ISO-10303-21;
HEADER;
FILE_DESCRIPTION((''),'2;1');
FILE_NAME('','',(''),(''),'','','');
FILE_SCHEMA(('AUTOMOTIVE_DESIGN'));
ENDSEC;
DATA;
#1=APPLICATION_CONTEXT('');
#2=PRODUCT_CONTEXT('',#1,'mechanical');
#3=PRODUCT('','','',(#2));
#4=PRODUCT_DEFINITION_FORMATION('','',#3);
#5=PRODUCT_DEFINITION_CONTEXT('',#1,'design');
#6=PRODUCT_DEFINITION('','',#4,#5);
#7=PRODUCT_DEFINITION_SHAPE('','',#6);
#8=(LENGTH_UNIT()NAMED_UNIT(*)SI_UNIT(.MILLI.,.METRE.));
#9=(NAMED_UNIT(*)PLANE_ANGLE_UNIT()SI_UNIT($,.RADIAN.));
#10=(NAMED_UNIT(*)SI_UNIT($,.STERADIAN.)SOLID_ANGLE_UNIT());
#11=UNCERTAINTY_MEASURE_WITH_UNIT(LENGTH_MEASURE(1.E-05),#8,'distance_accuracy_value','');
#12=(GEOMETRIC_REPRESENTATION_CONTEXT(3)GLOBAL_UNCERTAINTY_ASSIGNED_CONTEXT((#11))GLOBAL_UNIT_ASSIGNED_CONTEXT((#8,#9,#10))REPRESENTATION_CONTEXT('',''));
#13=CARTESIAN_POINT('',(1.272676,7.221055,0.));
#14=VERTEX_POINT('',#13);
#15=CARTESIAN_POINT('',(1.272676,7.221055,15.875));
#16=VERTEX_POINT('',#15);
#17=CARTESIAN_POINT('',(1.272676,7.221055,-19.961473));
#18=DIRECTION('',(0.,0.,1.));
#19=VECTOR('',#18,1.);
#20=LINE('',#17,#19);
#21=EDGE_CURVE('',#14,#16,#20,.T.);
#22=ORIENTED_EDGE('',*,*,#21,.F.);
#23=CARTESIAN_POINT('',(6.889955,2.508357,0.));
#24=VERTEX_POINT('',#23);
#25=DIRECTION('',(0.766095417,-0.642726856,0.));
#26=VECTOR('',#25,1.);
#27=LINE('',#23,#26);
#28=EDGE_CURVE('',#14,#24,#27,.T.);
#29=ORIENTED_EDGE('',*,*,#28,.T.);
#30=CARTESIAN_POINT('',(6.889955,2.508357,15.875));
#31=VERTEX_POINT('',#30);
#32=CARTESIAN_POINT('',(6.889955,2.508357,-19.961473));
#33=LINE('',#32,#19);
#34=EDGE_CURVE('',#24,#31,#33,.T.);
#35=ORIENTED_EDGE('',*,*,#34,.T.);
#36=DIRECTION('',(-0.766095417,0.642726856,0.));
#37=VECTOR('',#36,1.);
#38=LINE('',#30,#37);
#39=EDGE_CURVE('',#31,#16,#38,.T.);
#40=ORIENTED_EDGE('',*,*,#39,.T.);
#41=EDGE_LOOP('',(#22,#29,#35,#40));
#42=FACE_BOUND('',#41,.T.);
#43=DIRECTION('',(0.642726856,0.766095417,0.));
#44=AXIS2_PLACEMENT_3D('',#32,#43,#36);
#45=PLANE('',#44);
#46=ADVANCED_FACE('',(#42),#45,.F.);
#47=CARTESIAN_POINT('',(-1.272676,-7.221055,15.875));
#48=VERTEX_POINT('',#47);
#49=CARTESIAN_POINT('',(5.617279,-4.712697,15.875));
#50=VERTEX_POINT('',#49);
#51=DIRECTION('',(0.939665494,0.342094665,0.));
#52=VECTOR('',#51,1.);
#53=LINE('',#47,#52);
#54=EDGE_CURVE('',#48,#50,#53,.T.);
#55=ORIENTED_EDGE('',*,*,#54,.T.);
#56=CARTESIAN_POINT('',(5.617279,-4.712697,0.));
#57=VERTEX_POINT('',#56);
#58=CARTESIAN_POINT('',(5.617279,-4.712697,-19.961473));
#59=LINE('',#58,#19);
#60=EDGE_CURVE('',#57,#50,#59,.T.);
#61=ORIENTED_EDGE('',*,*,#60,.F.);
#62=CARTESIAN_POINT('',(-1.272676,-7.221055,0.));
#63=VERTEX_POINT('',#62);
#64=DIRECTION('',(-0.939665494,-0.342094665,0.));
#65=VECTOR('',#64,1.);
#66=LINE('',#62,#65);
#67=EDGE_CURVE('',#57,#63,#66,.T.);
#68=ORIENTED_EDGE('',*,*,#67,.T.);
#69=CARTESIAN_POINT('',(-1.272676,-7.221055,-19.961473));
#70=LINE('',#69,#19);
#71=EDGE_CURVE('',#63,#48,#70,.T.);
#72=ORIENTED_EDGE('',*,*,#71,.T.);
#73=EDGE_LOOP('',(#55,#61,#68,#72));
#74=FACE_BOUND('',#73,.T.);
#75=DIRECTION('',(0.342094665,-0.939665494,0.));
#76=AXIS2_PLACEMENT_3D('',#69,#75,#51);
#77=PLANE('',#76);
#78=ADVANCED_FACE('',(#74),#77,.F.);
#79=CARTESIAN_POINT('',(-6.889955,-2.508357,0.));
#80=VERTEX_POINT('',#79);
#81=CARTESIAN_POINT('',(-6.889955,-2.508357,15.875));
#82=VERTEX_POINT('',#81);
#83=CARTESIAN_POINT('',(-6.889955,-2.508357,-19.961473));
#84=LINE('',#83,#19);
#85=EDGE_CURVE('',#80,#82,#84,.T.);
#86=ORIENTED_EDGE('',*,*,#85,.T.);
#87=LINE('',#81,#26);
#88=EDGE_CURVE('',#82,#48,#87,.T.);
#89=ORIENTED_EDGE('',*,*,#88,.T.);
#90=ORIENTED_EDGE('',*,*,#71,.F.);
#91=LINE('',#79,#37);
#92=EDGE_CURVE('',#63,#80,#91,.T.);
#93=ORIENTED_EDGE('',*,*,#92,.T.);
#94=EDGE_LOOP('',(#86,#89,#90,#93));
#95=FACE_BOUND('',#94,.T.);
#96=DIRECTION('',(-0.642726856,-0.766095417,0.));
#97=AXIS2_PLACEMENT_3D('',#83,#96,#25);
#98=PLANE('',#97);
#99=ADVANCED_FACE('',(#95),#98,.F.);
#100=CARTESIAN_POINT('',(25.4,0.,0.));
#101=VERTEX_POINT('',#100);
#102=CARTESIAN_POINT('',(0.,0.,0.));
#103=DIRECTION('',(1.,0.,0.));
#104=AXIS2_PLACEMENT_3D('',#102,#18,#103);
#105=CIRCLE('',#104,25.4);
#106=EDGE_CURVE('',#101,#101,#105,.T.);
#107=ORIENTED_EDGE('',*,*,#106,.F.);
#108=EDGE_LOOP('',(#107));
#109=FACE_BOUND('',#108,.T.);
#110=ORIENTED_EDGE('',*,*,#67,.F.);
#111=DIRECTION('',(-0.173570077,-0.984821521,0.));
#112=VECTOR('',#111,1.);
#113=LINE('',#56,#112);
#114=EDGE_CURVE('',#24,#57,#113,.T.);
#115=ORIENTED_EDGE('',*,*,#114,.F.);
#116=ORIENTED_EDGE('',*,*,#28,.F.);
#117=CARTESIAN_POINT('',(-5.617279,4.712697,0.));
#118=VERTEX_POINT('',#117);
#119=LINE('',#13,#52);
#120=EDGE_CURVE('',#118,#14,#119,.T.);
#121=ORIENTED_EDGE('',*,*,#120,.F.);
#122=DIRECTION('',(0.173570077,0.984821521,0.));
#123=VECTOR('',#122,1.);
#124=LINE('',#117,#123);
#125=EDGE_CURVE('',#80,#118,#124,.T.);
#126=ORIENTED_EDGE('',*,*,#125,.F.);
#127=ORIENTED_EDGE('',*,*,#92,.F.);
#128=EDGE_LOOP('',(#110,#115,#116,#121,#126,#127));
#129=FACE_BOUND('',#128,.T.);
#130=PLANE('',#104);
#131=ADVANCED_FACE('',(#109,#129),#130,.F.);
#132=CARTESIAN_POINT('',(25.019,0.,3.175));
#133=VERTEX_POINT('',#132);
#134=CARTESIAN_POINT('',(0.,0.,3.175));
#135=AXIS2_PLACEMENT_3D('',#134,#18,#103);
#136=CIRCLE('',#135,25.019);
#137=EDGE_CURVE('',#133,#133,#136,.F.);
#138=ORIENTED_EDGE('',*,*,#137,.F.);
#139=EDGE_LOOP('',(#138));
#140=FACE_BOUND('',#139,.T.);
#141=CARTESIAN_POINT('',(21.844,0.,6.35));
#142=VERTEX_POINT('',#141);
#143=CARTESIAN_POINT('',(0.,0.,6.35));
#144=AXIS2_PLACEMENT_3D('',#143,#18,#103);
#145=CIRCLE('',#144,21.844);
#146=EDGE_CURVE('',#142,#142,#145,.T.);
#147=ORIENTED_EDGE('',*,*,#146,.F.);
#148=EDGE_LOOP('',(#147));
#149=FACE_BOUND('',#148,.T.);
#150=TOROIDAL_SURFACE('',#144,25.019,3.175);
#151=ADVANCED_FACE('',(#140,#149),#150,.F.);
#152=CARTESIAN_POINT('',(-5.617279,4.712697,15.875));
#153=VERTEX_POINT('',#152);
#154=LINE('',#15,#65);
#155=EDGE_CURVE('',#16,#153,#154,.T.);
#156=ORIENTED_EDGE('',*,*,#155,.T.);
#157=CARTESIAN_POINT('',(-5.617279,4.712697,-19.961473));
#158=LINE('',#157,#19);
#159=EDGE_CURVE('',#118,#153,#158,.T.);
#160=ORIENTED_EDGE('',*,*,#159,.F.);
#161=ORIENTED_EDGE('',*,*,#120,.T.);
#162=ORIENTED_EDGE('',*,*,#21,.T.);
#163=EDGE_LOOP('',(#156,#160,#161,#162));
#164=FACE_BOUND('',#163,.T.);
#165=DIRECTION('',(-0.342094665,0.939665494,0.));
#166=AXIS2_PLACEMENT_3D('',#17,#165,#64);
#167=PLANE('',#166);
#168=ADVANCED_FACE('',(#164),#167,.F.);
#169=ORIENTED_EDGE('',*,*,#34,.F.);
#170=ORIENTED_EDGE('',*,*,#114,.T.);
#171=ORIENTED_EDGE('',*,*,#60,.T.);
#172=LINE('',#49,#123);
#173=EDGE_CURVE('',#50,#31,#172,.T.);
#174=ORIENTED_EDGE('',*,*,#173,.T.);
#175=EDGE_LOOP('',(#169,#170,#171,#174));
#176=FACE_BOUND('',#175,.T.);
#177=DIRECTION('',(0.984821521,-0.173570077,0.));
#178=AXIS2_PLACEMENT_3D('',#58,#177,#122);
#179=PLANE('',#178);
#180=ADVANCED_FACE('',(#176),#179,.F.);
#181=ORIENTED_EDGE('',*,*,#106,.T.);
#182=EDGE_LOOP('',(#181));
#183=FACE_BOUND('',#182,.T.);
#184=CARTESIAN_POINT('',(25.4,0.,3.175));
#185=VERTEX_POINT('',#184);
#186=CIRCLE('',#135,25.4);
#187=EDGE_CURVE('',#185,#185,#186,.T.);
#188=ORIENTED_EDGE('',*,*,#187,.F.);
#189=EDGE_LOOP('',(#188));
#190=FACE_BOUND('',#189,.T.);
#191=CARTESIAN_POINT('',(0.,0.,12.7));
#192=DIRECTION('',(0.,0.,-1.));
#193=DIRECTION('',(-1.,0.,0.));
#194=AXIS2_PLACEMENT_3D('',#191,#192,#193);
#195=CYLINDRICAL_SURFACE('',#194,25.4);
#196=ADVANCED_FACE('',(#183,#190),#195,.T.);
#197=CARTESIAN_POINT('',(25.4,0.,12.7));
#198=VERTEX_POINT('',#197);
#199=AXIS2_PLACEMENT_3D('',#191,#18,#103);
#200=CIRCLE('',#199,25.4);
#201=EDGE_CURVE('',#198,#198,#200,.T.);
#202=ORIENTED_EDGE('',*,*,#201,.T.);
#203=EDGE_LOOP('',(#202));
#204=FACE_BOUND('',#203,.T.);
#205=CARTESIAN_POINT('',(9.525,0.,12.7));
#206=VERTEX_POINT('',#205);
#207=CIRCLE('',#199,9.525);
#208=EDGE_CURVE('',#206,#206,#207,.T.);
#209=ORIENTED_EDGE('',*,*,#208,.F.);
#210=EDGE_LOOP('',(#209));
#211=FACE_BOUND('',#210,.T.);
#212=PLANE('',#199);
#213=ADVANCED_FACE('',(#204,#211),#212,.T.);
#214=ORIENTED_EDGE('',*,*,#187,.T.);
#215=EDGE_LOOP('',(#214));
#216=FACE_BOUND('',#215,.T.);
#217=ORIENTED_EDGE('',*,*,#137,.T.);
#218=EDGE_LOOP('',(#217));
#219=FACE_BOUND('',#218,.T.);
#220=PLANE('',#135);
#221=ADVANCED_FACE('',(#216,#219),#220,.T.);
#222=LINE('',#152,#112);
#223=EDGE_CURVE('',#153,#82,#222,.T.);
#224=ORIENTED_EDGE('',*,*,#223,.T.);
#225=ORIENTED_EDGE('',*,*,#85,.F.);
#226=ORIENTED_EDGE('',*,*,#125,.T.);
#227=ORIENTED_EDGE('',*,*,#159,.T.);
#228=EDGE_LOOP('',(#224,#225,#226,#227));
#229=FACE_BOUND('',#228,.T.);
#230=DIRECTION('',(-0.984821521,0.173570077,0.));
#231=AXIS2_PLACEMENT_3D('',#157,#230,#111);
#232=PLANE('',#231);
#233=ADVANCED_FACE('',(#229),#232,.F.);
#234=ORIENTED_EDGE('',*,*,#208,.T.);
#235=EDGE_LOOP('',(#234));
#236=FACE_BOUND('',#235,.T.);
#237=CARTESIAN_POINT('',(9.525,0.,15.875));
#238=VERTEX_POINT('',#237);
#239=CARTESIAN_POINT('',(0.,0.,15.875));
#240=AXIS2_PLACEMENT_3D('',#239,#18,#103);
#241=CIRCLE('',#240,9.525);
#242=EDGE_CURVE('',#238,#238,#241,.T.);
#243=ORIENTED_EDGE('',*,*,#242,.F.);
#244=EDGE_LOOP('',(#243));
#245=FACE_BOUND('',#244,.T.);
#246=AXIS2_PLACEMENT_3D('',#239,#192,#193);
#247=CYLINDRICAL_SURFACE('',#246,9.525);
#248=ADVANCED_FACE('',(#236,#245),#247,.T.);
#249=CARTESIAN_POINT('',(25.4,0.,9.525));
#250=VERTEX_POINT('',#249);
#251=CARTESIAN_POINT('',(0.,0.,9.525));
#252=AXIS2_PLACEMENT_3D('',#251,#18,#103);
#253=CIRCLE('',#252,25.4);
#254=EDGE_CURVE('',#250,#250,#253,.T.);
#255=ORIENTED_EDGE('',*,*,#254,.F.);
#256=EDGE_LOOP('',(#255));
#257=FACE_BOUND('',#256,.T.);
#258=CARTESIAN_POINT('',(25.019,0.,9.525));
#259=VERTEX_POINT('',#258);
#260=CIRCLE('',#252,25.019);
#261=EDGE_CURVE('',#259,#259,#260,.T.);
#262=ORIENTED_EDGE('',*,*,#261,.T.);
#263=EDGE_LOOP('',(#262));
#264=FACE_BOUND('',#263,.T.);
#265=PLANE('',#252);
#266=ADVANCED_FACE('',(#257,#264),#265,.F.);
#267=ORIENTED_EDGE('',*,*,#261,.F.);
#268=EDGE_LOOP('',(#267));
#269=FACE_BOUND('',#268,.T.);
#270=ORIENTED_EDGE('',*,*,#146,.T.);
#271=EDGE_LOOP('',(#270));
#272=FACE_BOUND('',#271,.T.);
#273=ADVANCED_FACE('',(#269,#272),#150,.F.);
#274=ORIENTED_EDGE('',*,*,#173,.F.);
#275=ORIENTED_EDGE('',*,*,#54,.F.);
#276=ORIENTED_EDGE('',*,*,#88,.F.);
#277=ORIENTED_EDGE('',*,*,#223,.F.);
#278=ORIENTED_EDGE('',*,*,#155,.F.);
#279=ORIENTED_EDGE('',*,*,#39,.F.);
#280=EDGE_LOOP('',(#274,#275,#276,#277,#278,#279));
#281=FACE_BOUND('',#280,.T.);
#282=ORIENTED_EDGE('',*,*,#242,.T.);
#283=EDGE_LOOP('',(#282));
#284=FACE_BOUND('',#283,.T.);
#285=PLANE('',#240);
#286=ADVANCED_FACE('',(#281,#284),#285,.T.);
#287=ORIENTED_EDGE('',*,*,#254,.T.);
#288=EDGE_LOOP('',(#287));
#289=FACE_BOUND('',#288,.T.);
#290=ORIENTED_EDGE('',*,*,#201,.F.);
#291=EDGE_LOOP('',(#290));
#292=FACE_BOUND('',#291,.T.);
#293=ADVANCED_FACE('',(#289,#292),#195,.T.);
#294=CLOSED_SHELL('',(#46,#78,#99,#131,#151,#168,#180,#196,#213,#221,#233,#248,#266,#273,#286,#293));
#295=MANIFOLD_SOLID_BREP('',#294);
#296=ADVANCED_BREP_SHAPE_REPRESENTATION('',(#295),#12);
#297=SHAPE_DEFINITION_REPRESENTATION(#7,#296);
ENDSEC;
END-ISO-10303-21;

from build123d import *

# Parameters (mm, degrees)
SKETCH1_R           = 25.4
BOSS_EXTRUDE1_DEPTH = 12.7
CUT_EXTRUDE1_START  = -6.35
SKETCH2_R           = 25.4
SKETCH2_R_2         = 21.844
CUT_EXTRUDE1_DEPTH  = 6.35
FILLET1_R           = 3.175
CUT_EXTRUDE4_DEPTH  = 12.7
SKETCH6_R           = 9.525
BOSS_EXTRUDE4_DEPTH = 3.175


with BuildPart() as part:
    # Sketch1 → Boss-Extrude1 (new body)
    with BuildSketch(Plane.XY):
        Circle(SKETCH1_R)
    extrude(amount=BOSS_EXTRUDE1_DEPTH)

    # Sketch2 → Cut-Extrude1 (cut)
    with BuildSketch(Plane.XY.offset(9.525).offset(CUT_EXTRUDE1_START)):
        Circle(SKETCH2_R)
        Circle(SKETCH2_R_2, mode=Mode.SUBTRACT)
    extrude(amount=CUT_EXTRUDE1_DEPTH, mode=Mode.SUBTRACT)

    # Fillet1
    fillet1_edges = [part.edges().sort_by_distance(p)[0] for p in [
        (-21.844, 0, 3.175),
        (-21.844, 0, 9.525),
    ]]
    fillet(fillet1_edges, radius=FILLET1_R - 0.0001)  # a hair under: the kernel refuses the full size

    # Sketch3 → Cut-Extrude4 (cut)
    with BuildSketch(Plane.XY.offset(12.7)):
        Polygon((-1.272676276, -7.221054523), (5.617278521, -4.712697248), (6.889954797, 2.508357276), (1.272676276, 7.221054523), (-5.617278521, 4.712697248), (-6.889954797, -2.508357276), align=None)
    extrude(amount=-CUT_EXTRUDE4_DEPTH, mode=Mode.SUBTRACT)

    # Sketch6 → Boss-Extrude4 (add)
    with BuildSketch(Plane.XY.offset(12.7)):
        Circle(SKETCH6_R)
        Polygon((-1.272676276, -7.221054523), (5.617278521, -4.712697248), (6.889954797, 2.508357276), (1.272676276, 7.221054523), (-5.617278521, 4.712697248), (-6.889954797, -2.508357276), align=None, mode=Mode.SUBTRACT)
    extrude(amount=BOSS_EXTRUDE4_DEPTH)


solid = part.part
